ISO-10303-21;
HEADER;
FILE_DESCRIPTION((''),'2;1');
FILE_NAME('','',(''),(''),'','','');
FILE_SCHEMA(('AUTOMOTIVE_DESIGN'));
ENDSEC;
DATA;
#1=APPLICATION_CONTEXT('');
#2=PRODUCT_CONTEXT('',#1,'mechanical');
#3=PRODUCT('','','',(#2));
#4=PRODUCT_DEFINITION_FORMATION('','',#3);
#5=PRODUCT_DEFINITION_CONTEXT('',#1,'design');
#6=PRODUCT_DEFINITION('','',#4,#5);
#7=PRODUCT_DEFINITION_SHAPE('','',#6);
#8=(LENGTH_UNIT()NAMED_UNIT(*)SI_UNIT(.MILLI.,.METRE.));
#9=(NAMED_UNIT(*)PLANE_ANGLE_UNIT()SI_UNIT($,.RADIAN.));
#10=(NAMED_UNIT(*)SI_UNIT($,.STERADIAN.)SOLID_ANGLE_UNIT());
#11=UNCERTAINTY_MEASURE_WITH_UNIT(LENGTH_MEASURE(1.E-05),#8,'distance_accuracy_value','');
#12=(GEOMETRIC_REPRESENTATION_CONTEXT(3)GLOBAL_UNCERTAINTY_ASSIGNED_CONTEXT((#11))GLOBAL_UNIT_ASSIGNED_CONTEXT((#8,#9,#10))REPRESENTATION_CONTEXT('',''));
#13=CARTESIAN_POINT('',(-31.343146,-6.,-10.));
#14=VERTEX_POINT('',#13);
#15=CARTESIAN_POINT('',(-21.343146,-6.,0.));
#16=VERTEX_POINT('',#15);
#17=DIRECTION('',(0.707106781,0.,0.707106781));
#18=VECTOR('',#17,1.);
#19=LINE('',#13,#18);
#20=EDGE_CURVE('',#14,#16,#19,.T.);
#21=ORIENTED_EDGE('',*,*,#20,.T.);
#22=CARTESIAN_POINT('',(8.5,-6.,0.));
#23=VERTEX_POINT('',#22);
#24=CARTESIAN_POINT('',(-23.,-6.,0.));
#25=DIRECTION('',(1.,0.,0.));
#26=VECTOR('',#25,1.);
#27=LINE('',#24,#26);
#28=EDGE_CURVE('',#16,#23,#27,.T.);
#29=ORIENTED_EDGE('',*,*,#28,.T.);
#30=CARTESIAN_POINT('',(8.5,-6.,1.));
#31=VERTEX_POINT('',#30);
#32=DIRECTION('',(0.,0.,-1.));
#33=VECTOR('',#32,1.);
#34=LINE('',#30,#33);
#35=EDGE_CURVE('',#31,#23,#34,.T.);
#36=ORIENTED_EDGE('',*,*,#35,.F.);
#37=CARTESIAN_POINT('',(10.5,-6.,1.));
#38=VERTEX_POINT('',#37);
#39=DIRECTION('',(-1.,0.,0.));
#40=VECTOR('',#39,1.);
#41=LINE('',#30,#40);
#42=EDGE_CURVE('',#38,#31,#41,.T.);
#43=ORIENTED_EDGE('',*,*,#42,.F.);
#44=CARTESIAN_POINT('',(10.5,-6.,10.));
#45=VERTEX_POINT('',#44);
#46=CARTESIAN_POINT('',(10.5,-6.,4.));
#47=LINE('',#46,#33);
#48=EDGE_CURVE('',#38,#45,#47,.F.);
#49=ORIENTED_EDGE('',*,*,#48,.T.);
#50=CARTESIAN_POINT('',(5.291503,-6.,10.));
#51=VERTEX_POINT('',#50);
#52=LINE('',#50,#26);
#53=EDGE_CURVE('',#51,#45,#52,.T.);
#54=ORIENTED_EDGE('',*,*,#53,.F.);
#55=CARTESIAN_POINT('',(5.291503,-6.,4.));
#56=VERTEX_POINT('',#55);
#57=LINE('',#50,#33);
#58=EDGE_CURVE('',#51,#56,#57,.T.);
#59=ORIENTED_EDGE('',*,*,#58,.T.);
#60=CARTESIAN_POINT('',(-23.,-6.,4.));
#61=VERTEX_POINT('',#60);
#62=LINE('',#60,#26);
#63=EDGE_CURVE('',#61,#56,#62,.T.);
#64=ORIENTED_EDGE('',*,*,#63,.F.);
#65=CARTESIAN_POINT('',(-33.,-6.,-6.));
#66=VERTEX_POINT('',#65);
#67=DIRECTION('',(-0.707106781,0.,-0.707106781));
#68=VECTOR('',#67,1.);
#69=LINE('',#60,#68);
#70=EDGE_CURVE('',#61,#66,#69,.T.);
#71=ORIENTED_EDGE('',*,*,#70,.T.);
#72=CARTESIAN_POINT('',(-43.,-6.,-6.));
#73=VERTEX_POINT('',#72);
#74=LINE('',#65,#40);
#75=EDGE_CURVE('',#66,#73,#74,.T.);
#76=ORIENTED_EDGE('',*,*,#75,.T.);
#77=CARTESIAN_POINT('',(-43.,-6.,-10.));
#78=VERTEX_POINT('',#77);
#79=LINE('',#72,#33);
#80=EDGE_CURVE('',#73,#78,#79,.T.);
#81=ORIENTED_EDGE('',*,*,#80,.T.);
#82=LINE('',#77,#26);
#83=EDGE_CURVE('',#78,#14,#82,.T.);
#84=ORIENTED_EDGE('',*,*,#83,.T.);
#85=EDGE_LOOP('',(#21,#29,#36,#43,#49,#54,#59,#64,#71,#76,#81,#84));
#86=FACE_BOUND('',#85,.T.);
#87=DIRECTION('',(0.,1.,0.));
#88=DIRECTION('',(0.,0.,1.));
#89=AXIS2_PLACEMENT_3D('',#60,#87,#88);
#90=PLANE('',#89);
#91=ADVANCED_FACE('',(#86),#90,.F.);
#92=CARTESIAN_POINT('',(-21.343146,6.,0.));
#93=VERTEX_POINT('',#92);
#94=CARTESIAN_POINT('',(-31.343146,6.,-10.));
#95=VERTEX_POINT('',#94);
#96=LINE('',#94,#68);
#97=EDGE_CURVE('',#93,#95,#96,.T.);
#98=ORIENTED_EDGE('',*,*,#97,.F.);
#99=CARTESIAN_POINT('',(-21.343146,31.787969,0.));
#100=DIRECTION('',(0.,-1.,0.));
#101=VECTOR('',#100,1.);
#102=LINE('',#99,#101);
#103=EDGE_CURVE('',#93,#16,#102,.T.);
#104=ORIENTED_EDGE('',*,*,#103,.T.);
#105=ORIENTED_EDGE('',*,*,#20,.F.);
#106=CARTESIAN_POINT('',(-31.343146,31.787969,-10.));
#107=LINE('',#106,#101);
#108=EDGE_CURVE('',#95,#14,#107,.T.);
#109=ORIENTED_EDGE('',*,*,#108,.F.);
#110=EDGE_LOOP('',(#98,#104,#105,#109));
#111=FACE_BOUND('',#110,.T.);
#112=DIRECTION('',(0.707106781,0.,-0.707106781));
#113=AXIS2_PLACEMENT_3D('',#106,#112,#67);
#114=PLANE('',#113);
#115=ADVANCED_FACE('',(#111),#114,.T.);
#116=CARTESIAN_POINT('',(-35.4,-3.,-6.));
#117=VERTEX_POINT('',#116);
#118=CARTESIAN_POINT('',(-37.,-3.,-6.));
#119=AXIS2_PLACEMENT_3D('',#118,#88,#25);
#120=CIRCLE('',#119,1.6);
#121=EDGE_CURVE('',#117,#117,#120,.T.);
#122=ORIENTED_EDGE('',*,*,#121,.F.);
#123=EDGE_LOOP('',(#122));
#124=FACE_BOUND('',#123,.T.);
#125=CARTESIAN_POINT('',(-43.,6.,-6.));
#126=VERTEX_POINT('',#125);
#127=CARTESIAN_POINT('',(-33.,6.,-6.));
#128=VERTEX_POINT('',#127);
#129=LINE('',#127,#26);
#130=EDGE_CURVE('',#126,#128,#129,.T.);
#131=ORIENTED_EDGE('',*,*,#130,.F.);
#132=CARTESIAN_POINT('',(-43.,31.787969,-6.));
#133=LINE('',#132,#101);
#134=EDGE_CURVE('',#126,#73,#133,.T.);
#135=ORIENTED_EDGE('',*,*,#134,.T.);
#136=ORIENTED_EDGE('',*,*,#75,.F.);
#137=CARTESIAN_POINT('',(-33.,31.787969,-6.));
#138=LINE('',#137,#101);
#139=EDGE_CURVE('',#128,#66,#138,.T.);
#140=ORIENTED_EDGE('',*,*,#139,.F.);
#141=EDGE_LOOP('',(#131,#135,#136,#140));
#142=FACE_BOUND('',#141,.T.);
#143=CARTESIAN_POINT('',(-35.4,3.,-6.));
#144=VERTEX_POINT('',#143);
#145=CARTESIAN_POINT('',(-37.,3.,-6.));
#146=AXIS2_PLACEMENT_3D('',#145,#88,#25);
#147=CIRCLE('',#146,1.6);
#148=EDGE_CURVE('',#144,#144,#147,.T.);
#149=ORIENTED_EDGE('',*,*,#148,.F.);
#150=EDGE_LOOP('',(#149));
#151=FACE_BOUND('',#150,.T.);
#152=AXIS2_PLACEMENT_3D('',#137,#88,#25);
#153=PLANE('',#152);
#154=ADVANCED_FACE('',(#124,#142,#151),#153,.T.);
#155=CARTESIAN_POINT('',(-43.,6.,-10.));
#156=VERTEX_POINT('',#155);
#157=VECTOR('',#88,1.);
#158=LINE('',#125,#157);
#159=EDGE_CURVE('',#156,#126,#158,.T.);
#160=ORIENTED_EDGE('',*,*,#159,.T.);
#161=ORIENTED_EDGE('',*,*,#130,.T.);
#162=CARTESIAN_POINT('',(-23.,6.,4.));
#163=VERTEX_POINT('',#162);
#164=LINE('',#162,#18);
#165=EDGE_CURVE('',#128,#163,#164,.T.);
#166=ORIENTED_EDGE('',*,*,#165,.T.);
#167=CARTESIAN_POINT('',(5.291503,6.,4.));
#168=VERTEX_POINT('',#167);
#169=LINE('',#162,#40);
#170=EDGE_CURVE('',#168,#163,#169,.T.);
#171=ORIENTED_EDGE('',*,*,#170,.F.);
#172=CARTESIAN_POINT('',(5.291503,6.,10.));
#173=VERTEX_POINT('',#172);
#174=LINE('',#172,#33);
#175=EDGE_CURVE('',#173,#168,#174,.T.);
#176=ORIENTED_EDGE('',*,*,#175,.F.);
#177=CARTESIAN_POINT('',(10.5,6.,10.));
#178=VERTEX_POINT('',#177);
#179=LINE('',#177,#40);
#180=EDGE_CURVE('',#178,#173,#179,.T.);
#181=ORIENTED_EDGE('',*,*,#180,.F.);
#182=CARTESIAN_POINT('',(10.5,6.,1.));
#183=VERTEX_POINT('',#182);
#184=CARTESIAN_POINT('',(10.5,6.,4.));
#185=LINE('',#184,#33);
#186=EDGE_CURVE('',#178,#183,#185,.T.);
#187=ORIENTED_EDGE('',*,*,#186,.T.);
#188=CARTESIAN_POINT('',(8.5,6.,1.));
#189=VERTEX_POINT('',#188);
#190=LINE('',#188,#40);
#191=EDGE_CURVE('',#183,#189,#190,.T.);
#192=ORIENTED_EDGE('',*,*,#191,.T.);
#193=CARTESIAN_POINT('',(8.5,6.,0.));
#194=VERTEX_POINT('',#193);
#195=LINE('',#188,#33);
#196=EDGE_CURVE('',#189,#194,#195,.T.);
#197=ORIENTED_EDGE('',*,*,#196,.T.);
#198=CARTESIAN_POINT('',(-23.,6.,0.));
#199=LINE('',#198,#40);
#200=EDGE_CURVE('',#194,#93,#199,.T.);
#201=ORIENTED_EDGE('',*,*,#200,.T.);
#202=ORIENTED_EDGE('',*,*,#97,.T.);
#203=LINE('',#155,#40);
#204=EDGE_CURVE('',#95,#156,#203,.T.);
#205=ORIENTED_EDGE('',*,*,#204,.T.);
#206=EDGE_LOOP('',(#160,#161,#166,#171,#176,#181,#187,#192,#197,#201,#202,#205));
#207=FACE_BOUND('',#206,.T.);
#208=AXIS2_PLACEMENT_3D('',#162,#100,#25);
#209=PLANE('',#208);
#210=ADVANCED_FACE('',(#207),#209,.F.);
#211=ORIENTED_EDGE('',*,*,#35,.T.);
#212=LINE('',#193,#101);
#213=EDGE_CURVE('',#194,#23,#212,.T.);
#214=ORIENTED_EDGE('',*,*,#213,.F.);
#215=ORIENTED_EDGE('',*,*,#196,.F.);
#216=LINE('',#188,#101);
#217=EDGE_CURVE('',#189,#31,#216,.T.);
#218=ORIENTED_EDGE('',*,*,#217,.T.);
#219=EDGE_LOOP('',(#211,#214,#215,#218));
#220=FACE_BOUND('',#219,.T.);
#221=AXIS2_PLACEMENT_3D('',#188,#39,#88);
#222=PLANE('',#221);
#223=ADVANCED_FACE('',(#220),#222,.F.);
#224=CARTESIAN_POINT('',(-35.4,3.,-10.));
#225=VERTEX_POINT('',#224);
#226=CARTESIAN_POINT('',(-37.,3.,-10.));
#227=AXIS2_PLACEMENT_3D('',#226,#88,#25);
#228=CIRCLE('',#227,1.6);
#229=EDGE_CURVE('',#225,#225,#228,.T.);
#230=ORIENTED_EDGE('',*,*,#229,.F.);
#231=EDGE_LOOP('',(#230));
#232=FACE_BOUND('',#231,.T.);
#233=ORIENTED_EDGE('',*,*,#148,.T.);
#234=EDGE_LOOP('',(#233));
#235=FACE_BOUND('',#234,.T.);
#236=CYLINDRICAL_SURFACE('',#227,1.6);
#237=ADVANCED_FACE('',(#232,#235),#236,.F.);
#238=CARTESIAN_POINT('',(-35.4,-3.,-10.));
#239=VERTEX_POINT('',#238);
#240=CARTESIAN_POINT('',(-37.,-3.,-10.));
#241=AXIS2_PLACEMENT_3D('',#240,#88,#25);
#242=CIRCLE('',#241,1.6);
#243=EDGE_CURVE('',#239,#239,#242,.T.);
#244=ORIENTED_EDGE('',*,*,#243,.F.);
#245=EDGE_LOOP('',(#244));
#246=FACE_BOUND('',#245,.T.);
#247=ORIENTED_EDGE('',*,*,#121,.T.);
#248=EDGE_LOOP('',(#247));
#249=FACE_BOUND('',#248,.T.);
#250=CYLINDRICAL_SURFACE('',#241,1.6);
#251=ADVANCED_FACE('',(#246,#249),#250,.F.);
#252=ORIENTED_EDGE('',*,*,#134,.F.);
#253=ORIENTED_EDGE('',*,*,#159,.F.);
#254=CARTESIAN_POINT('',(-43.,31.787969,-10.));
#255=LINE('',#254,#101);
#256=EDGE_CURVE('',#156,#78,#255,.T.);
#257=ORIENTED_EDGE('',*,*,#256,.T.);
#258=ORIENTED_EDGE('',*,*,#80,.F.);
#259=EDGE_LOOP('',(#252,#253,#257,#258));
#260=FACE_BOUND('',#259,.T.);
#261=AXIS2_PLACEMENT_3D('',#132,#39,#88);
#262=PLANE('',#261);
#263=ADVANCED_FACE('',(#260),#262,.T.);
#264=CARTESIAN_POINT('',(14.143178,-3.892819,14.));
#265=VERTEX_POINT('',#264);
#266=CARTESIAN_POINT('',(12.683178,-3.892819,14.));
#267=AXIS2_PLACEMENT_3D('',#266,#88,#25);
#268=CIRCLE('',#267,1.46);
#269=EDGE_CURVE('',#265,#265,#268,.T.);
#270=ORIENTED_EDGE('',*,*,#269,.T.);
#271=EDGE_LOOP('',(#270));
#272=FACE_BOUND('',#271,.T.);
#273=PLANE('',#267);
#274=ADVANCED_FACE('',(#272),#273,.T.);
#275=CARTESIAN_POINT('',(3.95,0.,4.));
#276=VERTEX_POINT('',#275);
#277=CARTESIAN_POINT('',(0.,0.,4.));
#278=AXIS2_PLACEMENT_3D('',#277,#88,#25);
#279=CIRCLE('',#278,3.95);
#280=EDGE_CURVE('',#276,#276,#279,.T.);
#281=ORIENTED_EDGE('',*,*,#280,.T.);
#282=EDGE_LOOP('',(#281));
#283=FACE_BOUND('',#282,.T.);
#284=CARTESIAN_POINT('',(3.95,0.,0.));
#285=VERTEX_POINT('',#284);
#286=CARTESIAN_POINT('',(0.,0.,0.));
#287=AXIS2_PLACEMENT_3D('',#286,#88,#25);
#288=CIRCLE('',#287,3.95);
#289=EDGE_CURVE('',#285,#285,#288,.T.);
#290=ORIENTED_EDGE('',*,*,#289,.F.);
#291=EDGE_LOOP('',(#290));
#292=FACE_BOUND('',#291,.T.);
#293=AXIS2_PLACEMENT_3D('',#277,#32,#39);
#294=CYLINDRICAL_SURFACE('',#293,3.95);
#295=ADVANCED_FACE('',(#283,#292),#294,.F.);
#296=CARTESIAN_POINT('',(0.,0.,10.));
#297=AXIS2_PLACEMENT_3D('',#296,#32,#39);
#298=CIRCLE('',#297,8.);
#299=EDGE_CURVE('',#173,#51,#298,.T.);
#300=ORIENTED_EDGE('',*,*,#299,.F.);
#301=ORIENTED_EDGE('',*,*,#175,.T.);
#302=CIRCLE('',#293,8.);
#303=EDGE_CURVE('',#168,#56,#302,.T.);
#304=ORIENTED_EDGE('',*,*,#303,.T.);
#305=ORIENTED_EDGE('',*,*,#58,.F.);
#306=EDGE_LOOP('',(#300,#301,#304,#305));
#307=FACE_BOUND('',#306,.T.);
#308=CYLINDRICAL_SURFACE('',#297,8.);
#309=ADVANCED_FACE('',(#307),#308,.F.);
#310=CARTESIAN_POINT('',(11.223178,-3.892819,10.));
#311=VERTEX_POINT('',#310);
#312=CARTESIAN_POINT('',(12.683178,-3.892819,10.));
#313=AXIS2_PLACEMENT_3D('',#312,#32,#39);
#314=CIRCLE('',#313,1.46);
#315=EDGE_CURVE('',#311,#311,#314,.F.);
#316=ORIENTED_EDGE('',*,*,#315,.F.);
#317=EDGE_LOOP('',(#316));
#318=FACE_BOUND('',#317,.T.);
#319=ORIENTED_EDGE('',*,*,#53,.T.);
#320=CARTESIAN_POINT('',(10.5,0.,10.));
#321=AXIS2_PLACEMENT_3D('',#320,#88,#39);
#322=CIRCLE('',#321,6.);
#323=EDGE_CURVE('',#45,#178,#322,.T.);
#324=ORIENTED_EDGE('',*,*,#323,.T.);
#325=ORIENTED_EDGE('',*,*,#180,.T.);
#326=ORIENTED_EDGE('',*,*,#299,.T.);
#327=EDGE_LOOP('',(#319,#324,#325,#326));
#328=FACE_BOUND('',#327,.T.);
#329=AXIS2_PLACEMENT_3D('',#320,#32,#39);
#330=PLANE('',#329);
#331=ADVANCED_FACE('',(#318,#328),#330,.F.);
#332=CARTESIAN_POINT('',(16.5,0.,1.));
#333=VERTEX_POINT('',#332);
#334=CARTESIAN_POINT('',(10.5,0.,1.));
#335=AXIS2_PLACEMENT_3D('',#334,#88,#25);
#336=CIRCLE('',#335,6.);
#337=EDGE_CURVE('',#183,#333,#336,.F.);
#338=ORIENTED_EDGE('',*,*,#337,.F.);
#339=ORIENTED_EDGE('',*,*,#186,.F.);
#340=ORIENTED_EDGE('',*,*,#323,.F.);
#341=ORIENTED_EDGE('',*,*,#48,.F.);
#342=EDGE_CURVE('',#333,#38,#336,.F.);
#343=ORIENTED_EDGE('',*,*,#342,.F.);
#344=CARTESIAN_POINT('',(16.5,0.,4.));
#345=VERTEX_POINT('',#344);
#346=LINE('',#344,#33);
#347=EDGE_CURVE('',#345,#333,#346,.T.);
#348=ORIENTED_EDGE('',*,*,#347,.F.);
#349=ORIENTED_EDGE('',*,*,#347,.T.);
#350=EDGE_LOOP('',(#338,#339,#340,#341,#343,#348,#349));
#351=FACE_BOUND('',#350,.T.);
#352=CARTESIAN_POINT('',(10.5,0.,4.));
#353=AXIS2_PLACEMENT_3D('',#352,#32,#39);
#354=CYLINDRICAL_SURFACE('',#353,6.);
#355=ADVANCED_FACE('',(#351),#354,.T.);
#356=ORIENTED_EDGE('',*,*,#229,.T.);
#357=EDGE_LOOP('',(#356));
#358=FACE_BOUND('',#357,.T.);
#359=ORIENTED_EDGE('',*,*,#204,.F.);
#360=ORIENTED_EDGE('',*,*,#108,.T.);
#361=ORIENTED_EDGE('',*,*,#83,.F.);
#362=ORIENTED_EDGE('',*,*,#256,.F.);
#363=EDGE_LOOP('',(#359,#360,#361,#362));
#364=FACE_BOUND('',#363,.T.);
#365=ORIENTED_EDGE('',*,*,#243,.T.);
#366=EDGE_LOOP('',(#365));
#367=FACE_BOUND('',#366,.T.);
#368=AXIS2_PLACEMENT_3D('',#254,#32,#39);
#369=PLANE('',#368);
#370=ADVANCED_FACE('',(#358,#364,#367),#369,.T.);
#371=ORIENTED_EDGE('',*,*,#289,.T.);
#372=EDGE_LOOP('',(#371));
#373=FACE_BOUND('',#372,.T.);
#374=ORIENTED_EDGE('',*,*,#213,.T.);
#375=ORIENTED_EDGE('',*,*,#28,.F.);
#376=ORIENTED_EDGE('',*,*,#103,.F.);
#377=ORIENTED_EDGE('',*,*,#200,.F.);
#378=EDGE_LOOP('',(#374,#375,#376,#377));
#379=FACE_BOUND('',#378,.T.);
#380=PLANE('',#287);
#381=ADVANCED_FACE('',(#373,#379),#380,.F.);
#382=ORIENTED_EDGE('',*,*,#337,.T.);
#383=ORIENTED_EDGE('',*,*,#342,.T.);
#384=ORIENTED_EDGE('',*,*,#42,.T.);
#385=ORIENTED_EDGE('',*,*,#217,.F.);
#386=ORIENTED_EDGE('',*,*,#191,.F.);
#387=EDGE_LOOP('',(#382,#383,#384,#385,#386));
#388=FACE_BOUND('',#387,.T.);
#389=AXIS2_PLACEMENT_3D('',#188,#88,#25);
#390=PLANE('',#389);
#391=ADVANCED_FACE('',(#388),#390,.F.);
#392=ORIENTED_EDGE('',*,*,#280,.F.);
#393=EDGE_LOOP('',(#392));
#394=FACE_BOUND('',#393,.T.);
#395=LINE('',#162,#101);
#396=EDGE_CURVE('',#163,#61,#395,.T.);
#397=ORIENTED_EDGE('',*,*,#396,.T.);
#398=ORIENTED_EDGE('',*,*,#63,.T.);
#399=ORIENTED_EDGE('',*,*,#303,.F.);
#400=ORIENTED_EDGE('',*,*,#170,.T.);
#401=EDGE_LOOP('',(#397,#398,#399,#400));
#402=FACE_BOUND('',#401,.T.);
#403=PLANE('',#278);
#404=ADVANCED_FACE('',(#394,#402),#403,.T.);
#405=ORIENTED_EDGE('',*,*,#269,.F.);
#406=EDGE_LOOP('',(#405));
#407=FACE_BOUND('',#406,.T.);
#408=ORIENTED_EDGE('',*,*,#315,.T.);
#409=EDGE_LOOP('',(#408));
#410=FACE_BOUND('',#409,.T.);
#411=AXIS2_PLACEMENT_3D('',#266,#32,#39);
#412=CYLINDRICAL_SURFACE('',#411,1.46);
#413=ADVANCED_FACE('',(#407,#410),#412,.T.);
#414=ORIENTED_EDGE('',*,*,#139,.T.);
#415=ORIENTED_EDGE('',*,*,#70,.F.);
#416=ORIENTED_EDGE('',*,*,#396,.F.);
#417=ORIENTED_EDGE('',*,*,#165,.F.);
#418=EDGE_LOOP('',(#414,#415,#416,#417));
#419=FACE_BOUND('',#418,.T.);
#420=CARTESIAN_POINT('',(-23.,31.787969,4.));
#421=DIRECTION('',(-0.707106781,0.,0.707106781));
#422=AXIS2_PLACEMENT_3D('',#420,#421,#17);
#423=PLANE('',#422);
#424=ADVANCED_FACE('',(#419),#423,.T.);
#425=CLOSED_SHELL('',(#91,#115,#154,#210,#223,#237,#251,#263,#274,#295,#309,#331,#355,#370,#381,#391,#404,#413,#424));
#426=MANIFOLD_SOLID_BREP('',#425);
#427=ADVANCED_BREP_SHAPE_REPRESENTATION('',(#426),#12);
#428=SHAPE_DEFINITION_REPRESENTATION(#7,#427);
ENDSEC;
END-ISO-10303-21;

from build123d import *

# Parameters (mm, degrees)
SKETCH1_W           = 39.5
SKETCH1_H           = 12
SKETCH1_R           = 3.95
BOSS_EXTRUDE1_DEPTH = 4
BOSS_EXTRUDE3_DEPTH = 12
SKETCH4_R           = 1.6
CUT_EXTRUDE1_DEPTH  = 45.55333882
FILLET1_R           = 6
BOSS_EXTRUDE5_DEPTH = 6
SKETCH5_R           = 1.46
BOSS_EXTRUDE4_DEPTH = 4
SKETCH6_W           = 8
SKETCH6_H           = 1
CUT_EXTRUDE3_DEPTH  = 47.786750261


with BuildPart() as part:
    # Sketch1 → Boss-Extrude1 (new body)
    with BuildSketch(Plane.XY):
        with Locations((-3.25, 0)):
            Rectangle(SKETCH1_W, SKETCH1_H)
        Circle(SKETCH1_R, mode=Mode.SUBTRACT)
    extrude(amount=BOSS_EXTRUDE1_DEPTH)

    # Sketch3 → Boss-Extrude3 (add)
    with BuildSketch(Plane.XZ.offset(6)):
        Polygon((-23, 4), (-33, -6), (-43, -6), (-43, -10), (-31.343145751, -10), (-21.343145751, 0), align=None)
    extrude(amount=-BOSS_EXTRUDE3_DEPTH)

    # Sketch4 → Cut-Extrude1 (cut, through all)
    with BuildSketch(Plane.XY.offset(-6)):
        with Locations((-37, 3)):
            Circle(SKETCH4_R)
        with Locations((-37, -3)):
            Circle(SKETCH4_R)
    extrude(amount=-CUT_EXTRUDE1_DEPTH, mode=Mode.SUBTRACT)

    # Fillet1
    fillet1_edges = [part.edges().sort_by_distance(p)[0] for p in [
        (16.5, 6, 2),
        (16.5, -6, 2),
    ]]
    fillet(fillet1_edges, radius=FILLET1_R - 0.0001)  # a hair under: the kernel refuses the full size

    # Sketch7 → Boss-Extrude5 (add)
    with BuildSketch(Plane.XY.offset(4)):
        with BuildLine():
            Line((5.291502622, -6), (10.5, -6))
            ThreePointArc((10.5, -6), (16.5, 0), (10.5, 6))
            Line((10.5, 6), (5.291502622, 6))
            ThreePointArc((5.291502622, 6), (8, 0), (5.291502622, -6))
        make_face()
    extrude(amount=BOSS_EXTRUDE5_DEPTH)

    # Sketch5 → Boss-Extrude4 (add)
    with BuildSketch(Plane.XY.offset(10)):
        with Locations(Location((12.683177793, -3.892819016, 0), (0, 0, 180))):
            Circle(SKETCH5_R)
    extrude(amount=BOSS_EXTRUDE4_DEPTH)

    # Sketch6 → Cut-Extrude3 (cut, through all)
    with BuildSketch(Plane.XZ.offset(6)):
        with Locations((12.5, 0.5)):
            Rectangle(SKETCH6_W, SKETCH6_H)
    extrude(amount=-CUT_EXTRUDE3_DEPTH, mode=Mode.SUBTRACT)


solid = part.part
